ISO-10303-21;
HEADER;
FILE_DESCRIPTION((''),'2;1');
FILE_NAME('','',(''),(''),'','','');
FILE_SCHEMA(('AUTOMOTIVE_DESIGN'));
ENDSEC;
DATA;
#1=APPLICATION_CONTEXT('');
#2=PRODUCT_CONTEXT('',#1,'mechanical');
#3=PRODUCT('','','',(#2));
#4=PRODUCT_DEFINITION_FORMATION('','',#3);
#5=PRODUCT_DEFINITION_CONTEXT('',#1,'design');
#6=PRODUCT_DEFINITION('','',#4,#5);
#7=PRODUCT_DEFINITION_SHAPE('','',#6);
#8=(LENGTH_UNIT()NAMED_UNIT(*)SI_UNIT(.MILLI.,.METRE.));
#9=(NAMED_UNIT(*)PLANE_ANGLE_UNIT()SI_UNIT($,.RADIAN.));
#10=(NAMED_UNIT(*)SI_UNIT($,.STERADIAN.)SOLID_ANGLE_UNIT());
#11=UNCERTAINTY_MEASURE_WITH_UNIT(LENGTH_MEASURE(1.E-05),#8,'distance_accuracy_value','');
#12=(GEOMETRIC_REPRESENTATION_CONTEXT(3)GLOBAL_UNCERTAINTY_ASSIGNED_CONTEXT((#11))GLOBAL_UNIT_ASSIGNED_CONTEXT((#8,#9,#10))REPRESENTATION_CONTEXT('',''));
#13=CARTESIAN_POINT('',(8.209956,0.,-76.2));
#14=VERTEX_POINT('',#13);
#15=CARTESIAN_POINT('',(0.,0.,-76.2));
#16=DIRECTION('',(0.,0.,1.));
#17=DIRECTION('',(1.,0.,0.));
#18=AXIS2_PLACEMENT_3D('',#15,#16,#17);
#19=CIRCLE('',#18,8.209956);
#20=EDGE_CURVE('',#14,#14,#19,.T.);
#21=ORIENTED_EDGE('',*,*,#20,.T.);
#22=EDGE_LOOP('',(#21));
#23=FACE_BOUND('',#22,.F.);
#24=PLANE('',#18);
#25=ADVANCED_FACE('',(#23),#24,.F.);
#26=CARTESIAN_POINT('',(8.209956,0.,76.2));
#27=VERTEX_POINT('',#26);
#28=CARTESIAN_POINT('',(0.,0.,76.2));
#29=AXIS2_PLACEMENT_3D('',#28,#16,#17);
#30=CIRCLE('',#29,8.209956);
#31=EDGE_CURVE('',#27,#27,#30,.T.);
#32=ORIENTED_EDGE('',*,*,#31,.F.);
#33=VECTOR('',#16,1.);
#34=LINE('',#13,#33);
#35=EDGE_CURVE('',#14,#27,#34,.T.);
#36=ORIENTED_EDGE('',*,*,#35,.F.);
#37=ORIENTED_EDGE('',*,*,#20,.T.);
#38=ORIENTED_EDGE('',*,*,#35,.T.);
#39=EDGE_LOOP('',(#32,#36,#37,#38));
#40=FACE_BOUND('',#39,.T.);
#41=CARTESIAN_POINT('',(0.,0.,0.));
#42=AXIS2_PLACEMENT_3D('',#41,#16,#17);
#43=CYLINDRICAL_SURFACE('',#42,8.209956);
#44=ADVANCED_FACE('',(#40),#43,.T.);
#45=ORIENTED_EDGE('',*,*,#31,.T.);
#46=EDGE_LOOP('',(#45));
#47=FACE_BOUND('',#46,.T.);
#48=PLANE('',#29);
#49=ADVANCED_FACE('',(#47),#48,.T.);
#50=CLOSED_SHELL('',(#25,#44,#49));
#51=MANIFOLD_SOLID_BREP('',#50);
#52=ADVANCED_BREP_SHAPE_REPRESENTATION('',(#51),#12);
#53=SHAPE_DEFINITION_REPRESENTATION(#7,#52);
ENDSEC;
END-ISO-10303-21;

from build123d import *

# Parameters (mm, degrees)
F2_R          = 8.20995575
F3_DEPTH      = 76.2
F3_DEPTH_BACK = 76.2


# Not quite as in the source:
# - the program builds the solid bodies; features that only make, move or delete a surface that nothing else refers to are left out


with BuildPart() as f3:
    # F2 (on Top) → F3 (new body, two sides)
    with BuildSketch(Plane.XY) as f3_sk:
        Circle(F2_R)
    extrude(amount=F3_DEPTH)
    extrude(f3_sk.sketch, amount=-F3_DEPTH_BACK)


solid = f3.part
